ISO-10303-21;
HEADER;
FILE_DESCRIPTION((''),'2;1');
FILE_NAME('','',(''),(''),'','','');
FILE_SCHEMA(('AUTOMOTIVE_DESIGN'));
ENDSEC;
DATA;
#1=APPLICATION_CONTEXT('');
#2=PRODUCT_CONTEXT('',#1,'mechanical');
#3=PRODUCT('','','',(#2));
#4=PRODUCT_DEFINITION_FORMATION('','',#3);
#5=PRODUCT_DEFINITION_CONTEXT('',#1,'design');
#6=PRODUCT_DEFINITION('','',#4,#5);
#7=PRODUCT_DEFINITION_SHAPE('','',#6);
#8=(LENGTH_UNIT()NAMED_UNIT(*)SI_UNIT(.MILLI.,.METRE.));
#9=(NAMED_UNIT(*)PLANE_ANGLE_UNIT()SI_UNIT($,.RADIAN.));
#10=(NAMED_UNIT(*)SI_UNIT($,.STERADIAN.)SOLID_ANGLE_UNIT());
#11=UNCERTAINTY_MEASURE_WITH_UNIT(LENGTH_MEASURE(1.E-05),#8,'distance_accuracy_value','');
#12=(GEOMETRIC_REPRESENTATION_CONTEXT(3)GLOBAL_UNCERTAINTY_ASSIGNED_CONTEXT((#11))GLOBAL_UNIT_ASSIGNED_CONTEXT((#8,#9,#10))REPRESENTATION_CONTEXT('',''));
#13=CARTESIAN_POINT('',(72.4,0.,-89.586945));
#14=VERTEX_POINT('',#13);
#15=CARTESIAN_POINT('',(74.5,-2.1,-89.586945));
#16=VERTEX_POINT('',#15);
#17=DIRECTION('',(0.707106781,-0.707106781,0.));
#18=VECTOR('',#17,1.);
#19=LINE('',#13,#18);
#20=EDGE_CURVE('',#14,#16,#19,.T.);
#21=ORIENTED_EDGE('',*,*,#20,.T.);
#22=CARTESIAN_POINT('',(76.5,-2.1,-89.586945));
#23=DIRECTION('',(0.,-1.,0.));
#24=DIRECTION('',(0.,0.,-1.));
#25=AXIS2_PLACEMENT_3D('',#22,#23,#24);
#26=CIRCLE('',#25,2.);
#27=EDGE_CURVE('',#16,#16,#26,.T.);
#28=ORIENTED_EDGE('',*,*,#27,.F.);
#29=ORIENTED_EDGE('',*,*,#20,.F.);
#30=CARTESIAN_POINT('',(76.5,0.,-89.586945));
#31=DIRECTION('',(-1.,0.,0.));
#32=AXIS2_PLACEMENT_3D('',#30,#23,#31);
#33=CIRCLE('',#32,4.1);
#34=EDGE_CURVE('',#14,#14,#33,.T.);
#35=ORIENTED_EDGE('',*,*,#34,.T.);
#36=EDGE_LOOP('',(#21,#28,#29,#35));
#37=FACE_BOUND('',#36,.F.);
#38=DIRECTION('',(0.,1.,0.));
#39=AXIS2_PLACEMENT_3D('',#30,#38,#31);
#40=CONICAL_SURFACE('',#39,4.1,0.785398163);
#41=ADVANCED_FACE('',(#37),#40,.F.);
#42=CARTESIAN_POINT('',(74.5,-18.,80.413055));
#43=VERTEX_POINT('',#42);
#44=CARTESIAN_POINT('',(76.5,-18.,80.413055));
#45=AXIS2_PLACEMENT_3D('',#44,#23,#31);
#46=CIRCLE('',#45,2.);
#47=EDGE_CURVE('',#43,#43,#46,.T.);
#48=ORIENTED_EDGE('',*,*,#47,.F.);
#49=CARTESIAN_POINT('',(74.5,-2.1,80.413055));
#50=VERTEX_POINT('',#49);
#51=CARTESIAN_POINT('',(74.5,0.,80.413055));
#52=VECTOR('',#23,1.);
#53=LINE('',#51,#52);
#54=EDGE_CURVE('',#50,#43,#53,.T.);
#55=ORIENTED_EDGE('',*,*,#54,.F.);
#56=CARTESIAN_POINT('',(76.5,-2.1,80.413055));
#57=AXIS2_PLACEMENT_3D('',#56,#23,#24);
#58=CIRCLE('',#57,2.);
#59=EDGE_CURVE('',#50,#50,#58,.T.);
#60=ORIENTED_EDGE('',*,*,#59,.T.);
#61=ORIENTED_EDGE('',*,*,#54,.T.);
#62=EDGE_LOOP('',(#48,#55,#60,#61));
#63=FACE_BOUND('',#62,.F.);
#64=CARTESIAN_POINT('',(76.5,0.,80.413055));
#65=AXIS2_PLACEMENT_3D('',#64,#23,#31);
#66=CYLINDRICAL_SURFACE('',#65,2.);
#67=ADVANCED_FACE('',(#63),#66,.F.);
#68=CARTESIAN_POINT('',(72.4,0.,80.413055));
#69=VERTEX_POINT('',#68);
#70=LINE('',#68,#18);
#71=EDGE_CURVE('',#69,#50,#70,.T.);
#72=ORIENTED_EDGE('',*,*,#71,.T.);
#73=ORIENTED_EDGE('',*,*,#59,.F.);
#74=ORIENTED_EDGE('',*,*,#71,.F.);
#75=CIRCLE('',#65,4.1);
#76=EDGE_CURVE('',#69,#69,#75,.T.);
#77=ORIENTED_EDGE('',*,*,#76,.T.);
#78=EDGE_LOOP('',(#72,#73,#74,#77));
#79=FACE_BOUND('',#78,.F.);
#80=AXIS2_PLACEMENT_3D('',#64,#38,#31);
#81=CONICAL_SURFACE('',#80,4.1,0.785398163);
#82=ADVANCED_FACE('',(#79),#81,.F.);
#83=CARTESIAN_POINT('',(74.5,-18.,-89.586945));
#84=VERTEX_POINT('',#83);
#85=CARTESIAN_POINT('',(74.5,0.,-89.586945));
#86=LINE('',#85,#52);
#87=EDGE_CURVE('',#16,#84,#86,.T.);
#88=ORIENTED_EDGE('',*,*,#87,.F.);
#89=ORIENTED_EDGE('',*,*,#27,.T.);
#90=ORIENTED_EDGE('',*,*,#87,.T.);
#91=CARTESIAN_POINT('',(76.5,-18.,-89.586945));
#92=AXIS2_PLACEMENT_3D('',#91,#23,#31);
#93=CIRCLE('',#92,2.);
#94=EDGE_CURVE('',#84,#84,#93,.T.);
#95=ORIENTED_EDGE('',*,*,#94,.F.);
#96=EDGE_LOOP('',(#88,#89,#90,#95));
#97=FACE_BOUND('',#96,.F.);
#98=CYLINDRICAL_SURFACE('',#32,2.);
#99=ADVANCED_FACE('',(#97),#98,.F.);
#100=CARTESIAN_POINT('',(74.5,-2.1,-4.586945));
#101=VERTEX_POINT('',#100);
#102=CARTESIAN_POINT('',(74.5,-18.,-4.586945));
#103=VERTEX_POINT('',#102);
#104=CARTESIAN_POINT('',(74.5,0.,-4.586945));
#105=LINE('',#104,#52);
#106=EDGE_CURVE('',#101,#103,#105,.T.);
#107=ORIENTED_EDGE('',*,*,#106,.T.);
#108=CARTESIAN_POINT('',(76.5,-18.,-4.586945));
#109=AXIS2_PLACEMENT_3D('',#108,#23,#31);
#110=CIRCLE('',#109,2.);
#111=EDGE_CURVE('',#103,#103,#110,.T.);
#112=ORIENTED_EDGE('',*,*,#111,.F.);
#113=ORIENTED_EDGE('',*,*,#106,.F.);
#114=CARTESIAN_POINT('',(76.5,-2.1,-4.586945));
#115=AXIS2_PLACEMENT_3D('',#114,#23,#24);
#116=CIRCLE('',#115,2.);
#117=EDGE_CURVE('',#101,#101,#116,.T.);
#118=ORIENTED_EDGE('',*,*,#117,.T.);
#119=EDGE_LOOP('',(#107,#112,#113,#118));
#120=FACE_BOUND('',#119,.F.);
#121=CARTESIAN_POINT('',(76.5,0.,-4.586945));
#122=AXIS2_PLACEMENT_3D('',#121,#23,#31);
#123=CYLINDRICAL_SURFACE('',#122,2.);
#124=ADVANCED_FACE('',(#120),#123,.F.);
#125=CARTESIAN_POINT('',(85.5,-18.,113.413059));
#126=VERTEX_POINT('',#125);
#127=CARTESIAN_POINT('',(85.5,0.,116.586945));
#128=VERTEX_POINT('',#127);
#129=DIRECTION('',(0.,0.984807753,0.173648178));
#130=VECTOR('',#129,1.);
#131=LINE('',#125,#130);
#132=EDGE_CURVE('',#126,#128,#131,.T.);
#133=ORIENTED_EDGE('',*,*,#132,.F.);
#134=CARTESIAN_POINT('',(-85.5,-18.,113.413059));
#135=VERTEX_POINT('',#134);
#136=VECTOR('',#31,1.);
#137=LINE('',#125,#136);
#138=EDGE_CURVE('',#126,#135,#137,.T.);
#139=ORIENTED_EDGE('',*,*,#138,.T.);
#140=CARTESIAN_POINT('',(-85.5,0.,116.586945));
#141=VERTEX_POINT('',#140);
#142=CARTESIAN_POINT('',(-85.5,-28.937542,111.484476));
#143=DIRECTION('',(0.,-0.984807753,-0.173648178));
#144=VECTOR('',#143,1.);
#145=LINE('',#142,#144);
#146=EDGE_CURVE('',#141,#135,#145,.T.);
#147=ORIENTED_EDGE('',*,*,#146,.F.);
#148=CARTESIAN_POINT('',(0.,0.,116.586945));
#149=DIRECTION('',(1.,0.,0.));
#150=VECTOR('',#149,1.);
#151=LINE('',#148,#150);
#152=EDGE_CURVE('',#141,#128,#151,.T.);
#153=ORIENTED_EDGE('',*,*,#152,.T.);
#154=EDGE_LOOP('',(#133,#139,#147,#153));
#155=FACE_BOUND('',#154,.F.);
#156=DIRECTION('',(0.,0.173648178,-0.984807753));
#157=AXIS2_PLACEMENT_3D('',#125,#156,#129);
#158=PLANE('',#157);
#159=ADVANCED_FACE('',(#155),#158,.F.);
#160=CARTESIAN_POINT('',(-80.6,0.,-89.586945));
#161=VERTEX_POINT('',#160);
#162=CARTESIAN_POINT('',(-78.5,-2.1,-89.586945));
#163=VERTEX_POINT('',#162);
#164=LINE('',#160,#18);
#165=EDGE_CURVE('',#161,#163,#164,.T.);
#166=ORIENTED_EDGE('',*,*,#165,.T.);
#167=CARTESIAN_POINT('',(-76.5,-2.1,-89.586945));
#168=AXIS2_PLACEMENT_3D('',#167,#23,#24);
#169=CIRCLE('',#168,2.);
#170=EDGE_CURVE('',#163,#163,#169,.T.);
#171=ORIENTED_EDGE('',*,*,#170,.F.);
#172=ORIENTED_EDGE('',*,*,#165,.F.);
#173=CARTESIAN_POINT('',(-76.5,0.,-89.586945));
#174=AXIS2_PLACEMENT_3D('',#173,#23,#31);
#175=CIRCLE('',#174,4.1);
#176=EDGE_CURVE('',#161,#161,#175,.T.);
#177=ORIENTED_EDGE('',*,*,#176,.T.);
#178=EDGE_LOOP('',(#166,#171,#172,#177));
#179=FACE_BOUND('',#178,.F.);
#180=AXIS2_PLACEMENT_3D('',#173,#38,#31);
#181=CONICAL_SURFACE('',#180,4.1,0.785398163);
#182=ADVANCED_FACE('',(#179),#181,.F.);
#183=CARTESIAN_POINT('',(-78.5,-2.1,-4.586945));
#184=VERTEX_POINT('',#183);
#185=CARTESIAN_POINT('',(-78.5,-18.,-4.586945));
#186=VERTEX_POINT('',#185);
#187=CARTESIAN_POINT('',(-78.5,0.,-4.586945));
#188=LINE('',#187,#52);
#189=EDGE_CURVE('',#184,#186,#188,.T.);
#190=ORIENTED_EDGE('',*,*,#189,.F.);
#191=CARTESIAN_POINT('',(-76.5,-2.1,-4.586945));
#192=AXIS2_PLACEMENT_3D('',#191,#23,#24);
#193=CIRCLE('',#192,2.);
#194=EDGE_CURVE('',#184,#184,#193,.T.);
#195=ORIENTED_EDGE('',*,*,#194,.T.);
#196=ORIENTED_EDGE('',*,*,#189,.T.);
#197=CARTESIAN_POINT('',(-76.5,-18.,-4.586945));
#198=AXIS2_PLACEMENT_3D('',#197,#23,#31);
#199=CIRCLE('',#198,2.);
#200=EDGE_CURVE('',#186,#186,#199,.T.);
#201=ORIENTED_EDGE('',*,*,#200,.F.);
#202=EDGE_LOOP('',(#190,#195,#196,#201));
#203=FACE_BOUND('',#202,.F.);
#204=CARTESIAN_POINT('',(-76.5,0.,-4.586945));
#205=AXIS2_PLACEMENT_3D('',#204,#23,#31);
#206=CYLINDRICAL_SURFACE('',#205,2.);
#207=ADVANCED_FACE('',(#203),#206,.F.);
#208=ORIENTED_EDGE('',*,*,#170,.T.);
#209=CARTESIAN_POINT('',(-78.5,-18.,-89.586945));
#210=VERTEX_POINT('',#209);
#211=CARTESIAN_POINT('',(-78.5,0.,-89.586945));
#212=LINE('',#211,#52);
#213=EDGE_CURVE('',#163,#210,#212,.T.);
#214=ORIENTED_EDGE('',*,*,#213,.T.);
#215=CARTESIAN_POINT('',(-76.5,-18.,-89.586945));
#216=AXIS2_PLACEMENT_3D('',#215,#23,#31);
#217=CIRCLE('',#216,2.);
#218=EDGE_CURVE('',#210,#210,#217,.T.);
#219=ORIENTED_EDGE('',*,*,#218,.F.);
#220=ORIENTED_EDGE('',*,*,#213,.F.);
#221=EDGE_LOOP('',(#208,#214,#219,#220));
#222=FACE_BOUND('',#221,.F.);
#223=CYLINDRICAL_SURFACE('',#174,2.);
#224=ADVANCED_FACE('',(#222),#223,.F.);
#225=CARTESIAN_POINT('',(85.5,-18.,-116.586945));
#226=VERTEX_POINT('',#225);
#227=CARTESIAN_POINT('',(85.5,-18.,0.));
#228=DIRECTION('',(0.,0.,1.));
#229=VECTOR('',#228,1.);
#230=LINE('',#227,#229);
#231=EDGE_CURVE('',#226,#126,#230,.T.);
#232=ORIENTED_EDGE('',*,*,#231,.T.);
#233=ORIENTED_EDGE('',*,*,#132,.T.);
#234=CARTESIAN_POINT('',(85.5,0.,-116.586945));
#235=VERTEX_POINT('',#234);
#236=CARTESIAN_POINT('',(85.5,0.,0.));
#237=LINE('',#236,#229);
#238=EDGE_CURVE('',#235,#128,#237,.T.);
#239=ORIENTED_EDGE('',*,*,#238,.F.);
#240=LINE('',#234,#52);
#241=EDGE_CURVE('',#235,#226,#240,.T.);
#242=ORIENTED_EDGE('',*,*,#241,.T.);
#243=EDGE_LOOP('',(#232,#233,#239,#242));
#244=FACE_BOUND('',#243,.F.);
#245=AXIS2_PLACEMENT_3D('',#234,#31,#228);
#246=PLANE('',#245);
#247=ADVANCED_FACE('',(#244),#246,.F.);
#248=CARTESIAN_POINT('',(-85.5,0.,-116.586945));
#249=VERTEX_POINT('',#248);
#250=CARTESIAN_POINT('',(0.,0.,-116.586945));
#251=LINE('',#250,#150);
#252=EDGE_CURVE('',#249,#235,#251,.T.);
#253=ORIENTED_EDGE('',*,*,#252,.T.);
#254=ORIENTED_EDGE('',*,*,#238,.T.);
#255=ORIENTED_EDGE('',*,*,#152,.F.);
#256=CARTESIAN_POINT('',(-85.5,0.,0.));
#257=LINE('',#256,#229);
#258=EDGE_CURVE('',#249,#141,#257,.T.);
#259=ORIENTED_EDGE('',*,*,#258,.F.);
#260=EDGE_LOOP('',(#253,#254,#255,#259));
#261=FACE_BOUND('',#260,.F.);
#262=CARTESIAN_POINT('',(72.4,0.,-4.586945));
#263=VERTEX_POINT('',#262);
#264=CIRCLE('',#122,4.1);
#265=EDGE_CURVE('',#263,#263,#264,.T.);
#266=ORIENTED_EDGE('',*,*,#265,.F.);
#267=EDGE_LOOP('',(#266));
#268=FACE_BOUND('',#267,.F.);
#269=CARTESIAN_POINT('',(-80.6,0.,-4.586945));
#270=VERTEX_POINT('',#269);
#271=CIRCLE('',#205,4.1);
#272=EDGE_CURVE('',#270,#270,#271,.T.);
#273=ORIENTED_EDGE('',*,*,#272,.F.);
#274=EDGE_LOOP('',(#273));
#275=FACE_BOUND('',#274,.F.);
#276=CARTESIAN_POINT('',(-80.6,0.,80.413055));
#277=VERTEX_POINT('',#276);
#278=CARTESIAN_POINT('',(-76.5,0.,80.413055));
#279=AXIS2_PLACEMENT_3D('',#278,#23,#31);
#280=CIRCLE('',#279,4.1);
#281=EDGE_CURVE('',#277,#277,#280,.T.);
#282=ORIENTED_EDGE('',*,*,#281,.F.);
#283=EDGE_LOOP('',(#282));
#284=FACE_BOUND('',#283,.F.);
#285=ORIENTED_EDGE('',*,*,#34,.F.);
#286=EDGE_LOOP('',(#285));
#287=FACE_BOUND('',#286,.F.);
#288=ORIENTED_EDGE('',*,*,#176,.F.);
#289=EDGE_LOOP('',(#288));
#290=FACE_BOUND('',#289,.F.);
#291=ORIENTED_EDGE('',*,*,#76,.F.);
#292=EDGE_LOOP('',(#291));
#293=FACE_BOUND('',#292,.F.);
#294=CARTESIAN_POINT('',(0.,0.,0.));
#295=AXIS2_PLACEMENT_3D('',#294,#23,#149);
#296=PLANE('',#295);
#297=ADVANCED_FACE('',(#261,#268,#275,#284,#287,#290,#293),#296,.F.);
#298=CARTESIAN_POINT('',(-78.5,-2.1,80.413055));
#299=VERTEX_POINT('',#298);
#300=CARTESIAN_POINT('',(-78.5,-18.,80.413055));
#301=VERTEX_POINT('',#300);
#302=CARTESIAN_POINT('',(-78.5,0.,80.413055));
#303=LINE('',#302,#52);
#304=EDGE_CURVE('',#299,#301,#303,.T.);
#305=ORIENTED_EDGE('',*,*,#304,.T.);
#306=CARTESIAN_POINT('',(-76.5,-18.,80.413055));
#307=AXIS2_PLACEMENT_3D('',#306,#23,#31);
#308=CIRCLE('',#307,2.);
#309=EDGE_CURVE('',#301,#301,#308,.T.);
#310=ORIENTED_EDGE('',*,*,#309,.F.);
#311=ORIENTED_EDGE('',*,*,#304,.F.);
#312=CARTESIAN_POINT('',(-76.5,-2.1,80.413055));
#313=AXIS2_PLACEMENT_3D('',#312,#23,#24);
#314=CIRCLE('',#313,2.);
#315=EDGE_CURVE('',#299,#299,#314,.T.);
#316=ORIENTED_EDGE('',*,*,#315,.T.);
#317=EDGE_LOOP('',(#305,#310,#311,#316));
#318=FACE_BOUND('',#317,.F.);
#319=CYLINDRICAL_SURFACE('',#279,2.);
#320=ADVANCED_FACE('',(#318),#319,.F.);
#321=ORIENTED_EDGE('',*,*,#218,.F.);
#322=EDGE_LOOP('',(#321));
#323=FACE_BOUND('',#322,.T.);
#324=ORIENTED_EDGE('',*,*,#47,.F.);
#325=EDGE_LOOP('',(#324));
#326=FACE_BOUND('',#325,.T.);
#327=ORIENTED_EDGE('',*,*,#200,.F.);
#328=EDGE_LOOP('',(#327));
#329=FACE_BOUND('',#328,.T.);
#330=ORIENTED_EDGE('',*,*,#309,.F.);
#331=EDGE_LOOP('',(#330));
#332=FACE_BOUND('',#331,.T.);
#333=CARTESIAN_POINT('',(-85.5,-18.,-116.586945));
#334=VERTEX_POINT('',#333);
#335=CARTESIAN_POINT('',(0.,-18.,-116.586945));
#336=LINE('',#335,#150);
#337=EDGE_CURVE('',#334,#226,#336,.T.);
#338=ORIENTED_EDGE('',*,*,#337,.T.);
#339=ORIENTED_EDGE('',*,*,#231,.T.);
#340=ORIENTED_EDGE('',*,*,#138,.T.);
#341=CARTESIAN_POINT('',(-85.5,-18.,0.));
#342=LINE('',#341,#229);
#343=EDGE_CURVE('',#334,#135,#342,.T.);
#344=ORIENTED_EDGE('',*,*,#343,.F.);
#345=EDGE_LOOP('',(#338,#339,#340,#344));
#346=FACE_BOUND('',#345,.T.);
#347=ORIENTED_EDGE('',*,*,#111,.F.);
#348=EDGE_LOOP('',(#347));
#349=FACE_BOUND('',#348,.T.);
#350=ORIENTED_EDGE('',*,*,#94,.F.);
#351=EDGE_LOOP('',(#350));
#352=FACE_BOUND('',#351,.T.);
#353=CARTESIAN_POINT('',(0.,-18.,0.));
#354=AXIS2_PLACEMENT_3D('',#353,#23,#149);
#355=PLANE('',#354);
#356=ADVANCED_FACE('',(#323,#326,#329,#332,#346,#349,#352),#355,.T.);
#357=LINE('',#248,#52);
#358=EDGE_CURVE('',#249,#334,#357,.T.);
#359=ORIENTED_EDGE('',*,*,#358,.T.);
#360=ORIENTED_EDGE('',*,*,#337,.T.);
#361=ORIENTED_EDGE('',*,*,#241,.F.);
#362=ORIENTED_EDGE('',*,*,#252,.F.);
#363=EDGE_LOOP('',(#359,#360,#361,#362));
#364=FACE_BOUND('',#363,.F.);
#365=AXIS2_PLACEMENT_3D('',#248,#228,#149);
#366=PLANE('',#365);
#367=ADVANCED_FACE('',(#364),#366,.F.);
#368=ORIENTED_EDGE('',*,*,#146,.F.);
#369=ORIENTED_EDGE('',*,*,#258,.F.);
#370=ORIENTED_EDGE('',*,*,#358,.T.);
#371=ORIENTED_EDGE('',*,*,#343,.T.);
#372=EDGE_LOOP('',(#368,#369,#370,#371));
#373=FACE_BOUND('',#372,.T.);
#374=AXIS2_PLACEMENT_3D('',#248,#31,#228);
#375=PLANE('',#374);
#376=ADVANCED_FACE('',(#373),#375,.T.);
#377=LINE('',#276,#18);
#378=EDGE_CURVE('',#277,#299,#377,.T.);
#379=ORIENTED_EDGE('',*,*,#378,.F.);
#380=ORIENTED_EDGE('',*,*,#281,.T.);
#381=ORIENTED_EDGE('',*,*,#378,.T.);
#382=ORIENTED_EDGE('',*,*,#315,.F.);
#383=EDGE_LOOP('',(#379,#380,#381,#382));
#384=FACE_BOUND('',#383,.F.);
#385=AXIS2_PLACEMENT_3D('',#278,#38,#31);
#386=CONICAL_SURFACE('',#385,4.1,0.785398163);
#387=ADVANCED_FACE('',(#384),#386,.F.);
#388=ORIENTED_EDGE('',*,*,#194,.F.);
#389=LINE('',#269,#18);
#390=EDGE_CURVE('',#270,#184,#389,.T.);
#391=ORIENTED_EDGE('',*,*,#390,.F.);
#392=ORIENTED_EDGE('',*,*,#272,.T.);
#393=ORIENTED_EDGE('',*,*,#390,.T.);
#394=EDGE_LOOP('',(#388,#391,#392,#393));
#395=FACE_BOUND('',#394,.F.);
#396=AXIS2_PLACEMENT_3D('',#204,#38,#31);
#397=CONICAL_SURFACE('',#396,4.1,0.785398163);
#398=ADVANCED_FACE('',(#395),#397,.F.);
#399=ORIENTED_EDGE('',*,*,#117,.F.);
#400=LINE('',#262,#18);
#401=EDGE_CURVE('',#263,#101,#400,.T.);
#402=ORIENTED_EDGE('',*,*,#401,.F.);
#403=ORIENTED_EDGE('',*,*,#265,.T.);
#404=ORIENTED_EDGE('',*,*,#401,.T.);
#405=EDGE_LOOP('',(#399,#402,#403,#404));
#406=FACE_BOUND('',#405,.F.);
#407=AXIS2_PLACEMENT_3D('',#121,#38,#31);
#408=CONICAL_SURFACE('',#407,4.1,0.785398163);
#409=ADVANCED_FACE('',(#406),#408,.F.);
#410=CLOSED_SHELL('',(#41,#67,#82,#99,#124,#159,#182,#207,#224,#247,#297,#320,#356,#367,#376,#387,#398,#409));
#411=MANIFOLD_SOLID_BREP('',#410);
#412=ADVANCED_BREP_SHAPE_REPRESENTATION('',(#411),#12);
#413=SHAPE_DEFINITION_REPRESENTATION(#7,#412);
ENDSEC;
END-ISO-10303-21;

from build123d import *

# Parameters (mm, degrees)
F0_W           = 171
F0_H           = 233.17389
F1_DEPTH       = 18
F3_DEPTH       = 171.001
F5_D           = 4
F5_CSINK_D     = 8.2
F5_CSINK_ANGLE = 90


# Not quite as in the source:
# - a feature names something its author has since deleted; it is built from what else it names


with BuildPart() as f1:
    # F0 (on Front) → F1 (new body)
    with BuildSketch(Plane.XZ):
        Rectangle(F0_W, F0_H)
    extrude(amount=F1_DEPTH)

    # F2 (on face) → F3 (cut, through all)
    with BuildSketch(Plane.YZ.offset(85.5)):
        Polygon((-18, 113.4130593472), (0, 116.586945), (-18, 116.586945), align=None)
    extrude(amount=-F3_DEPTH, mode=Mode.SUBTRACT)

    # F5 (through all)
    with Locations(Plane(origin=(0, 0, 0), x_dir=(1, 0, 0), z_dir=(0, 1, 0))):
        with Locations((76.5, -80.413055), (-76.5, -80.413055), (76.5, 4.586945), (-76.5, 4.586945), (76.5, 89.586945), (-76.5, 89.586945)):
            CounterSinkHole(F5_D / 2, F5_CSINK_D / 2, counter_sink_angle=F5_CSINK_ANGLE)


solid = f1.part
